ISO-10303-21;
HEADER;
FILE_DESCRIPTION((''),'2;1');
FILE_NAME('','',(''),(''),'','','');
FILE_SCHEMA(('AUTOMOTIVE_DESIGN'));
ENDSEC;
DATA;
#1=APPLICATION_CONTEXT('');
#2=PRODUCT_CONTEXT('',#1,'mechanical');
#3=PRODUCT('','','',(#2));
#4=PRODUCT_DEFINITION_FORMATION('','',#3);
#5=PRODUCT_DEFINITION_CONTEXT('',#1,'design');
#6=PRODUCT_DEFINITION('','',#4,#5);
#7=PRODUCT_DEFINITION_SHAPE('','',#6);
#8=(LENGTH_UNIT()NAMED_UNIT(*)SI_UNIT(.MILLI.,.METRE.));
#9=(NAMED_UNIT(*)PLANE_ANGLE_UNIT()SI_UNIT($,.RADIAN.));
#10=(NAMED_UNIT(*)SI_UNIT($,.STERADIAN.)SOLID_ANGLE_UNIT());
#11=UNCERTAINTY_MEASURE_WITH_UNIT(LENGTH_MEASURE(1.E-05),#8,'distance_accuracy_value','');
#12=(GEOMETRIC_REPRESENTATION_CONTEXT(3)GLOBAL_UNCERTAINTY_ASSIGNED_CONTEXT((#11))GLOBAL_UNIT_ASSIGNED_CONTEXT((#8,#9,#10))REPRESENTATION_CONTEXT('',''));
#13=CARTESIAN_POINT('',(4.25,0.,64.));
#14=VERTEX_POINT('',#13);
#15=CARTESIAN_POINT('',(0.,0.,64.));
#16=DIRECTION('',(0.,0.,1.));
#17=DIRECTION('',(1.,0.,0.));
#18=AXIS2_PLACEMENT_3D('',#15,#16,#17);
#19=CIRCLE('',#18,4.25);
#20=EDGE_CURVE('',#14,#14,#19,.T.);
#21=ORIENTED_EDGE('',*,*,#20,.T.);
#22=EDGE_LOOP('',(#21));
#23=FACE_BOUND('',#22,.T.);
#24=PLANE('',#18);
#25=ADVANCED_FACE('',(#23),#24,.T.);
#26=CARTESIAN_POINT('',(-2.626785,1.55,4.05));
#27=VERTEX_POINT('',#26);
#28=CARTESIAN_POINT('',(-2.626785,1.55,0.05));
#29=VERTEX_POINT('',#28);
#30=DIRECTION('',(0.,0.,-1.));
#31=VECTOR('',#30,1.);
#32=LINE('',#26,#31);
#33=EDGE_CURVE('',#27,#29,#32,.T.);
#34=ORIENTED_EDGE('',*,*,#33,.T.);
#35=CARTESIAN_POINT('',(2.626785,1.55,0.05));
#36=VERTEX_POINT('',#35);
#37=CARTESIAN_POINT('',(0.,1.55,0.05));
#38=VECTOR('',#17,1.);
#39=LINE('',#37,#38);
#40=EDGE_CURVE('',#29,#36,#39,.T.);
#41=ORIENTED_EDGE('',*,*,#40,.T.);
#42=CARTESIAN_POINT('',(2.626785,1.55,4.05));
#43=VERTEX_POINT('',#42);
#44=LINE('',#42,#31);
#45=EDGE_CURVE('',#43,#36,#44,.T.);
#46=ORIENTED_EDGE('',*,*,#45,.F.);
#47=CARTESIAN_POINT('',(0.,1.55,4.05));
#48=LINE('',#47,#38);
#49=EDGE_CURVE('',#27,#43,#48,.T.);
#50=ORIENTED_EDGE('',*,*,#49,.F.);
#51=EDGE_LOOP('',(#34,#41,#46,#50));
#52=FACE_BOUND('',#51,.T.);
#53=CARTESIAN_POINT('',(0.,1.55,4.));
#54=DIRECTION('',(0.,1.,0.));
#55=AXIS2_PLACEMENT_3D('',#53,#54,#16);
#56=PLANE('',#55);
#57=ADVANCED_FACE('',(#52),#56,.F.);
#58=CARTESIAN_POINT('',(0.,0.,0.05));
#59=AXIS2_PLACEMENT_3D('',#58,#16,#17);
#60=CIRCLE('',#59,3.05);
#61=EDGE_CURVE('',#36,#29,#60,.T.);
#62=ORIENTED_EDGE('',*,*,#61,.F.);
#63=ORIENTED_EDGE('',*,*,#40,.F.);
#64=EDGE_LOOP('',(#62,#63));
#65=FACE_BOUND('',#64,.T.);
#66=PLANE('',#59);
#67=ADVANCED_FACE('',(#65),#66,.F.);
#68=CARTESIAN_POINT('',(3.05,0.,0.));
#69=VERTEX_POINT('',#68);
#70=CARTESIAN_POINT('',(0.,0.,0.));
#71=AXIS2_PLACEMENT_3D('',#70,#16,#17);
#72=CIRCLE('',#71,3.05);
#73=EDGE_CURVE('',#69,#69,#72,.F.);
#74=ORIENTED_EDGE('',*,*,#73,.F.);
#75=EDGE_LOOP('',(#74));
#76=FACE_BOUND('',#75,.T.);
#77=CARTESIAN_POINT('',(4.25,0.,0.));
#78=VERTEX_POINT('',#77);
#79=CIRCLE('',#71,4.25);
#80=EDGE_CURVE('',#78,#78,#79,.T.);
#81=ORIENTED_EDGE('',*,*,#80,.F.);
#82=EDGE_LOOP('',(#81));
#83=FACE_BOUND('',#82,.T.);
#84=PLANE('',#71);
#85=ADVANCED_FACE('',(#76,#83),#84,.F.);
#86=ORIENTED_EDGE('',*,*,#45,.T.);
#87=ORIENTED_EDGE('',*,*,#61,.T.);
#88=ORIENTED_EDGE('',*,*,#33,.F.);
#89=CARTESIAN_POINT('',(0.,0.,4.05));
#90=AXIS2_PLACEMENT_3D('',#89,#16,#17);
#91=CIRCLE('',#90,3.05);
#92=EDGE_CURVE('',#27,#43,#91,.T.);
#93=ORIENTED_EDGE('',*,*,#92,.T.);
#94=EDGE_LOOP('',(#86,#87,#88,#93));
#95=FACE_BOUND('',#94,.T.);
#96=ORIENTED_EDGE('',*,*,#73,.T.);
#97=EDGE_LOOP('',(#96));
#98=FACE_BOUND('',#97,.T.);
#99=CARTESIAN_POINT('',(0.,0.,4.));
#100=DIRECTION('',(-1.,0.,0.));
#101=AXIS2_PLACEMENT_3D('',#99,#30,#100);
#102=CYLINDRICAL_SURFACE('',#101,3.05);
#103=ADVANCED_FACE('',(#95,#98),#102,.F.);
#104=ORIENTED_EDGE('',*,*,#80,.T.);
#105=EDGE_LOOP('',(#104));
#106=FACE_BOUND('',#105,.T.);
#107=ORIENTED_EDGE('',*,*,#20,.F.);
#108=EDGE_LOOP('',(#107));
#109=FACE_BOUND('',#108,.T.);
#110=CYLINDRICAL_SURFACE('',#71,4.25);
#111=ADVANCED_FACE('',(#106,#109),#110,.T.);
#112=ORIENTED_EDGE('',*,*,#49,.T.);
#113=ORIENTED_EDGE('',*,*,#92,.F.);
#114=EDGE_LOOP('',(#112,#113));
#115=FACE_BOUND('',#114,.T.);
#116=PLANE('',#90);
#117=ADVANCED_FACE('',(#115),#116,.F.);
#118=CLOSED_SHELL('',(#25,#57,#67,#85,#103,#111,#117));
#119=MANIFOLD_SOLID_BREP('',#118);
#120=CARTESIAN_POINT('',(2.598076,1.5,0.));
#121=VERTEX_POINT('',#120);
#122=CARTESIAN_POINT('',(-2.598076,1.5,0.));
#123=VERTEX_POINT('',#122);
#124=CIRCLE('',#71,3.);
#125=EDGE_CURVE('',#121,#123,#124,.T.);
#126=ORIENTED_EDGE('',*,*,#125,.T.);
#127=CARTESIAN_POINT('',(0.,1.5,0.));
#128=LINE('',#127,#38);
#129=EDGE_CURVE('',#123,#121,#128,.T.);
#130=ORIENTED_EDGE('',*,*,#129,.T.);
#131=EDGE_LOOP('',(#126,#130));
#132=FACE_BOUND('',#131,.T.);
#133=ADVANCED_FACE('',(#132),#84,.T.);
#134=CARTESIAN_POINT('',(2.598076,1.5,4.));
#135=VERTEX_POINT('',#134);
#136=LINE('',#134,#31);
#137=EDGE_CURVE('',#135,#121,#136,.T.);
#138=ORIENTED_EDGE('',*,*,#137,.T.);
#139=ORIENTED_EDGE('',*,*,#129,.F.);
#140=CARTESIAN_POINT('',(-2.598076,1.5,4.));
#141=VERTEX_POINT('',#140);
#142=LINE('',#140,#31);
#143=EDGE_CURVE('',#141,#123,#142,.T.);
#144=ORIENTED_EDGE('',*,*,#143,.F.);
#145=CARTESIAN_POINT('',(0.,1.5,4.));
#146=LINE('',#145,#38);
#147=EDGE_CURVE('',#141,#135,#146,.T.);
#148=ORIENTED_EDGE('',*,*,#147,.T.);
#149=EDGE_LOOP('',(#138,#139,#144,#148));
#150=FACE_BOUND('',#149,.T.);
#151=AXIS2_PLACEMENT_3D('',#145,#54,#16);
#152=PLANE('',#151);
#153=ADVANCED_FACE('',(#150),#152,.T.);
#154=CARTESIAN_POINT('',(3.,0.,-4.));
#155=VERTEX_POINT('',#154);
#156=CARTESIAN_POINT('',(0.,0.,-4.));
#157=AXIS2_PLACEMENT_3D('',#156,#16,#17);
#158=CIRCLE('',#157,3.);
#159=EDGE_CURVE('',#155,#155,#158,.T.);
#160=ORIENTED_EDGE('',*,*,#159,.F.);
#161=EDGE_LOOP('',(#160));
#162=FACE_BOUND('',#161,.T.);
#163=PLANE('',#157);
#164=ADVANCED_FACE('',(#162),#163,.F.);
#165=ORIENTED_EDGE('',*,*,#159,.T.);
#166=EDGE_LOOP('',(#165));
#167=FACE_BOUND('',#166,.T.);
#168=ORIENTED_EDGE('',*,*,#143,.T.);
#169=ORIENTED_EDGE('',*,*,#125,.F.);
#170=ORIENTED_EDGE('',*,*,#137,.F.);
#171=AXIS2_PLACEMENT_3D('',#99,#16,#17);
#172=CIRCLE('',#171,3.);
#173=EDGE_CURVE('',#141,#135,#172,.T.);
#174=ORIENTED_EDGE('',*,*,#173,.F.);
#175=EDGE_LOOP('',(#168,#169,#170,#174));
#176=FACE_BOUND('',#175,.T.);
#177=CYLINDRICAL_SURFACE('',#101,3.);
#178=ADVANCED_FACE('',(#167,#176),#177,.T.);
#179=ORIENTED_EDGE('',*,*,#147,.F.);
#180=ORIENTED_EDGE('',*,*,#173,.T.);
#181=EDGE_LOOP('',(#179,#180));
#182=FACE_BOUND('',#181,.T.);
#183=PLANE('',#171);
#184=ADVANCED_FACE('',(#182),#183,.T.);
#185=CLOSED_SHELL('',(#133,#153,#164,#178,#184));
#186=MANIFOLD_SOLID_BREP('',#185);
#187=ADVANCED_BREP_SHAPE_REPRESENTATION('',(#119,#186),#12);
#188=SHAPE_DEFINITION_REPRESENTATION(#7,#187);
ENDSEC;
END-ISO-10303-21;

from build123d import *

# Parameters (mm, degrees)
EXTRUDE_1_DEPTH      = 4
EXTRUDE_START        = -4
SKETCH_1_3_R         = 3
EXTRUDE_2_DEPTH      = 4
EXTRUDE_5_DEPTH      = 60
EXTRUDE_5_DEPTH_BACK = 4
SKETCH_2_R           = 4.25
OTHER_2_DEPTH        = 4.05
OTHER_2_2_DEPTH      = 0.05


# Read off the part's stored shape, not the designer's step: 压凹2
with BuildPart() as part:
    # 草图1 → 凸台-拉伸1 (new body)
    with BuildSketch(Plane.XY):
        with BuildLine():
            Line((2.598076211, 1.5), (-2.598076211, 1.5))
            ThreePointArc((-2.598076211, 1.5), (-0.776457135, -2.897777479), (3, 0))
            ThreePointArc((3, 0), (2.897777479, 0.776457135), (2.598076211, 1.5))
        make_face()
    extrude(amount=EXTRUDE_1_DEPTH)

    # 草图1<3> → 凸台-拉伸2 (add)
    with BuildSketch(Plane.XY.offset(EXTRUDE_START)):
        with Locations(Location((0, 0, 0), (0, 0, 150))):
            Circle(SKETCH_1_3_R)
    extrude(amount=EXTRUDE_2_DEPTH)


with BuildPart() as body_2:
    # 草图2 → 凸台-拉伸5 (new, two sides: drawn at the far end of the back side and taken through both)
    with BuildSketch(Plane.XY.offset(4).offset(-EXTRUDE_5_DEPTH_BACK)):
        Circle(SKETCH_2_R)
    extrude(amount=EXTRUDE_5_DEPTH + EXTRUDE_5_DEPTH_BACK)

    # 压凹2 outline → 压凹2 (cut)
    with BuildSketch(Plane.XY):
        with BuildLine():
            ThreePointArc((-2.626785107, 1.55), (0, -3.05), (2.626785107, 1.55))
            Line((2.626785107, 1.55), (-2.626785107, 1.55))
        make_face()
    extrude(amount=OTHER_2_DEPTH, mode=Mode.SUBTRACT)

    # Other 2 2 outline → Other 2 2 (cut)
    with BuildSketch(Plane.XY):
        with BuildLine():
            Line((-2.626785107, 1.55), (2.626785107, 1.55))
            ThreePointArc((2.626785107, 1.55), (0, 3.05), (-2.626785107, 1.55))
        make_face()
    extrude(amount=OTHER_2_2_DEPTH, mode=Mode.SUBTRACT)


solid = Compound([part.part, body_2.part])
